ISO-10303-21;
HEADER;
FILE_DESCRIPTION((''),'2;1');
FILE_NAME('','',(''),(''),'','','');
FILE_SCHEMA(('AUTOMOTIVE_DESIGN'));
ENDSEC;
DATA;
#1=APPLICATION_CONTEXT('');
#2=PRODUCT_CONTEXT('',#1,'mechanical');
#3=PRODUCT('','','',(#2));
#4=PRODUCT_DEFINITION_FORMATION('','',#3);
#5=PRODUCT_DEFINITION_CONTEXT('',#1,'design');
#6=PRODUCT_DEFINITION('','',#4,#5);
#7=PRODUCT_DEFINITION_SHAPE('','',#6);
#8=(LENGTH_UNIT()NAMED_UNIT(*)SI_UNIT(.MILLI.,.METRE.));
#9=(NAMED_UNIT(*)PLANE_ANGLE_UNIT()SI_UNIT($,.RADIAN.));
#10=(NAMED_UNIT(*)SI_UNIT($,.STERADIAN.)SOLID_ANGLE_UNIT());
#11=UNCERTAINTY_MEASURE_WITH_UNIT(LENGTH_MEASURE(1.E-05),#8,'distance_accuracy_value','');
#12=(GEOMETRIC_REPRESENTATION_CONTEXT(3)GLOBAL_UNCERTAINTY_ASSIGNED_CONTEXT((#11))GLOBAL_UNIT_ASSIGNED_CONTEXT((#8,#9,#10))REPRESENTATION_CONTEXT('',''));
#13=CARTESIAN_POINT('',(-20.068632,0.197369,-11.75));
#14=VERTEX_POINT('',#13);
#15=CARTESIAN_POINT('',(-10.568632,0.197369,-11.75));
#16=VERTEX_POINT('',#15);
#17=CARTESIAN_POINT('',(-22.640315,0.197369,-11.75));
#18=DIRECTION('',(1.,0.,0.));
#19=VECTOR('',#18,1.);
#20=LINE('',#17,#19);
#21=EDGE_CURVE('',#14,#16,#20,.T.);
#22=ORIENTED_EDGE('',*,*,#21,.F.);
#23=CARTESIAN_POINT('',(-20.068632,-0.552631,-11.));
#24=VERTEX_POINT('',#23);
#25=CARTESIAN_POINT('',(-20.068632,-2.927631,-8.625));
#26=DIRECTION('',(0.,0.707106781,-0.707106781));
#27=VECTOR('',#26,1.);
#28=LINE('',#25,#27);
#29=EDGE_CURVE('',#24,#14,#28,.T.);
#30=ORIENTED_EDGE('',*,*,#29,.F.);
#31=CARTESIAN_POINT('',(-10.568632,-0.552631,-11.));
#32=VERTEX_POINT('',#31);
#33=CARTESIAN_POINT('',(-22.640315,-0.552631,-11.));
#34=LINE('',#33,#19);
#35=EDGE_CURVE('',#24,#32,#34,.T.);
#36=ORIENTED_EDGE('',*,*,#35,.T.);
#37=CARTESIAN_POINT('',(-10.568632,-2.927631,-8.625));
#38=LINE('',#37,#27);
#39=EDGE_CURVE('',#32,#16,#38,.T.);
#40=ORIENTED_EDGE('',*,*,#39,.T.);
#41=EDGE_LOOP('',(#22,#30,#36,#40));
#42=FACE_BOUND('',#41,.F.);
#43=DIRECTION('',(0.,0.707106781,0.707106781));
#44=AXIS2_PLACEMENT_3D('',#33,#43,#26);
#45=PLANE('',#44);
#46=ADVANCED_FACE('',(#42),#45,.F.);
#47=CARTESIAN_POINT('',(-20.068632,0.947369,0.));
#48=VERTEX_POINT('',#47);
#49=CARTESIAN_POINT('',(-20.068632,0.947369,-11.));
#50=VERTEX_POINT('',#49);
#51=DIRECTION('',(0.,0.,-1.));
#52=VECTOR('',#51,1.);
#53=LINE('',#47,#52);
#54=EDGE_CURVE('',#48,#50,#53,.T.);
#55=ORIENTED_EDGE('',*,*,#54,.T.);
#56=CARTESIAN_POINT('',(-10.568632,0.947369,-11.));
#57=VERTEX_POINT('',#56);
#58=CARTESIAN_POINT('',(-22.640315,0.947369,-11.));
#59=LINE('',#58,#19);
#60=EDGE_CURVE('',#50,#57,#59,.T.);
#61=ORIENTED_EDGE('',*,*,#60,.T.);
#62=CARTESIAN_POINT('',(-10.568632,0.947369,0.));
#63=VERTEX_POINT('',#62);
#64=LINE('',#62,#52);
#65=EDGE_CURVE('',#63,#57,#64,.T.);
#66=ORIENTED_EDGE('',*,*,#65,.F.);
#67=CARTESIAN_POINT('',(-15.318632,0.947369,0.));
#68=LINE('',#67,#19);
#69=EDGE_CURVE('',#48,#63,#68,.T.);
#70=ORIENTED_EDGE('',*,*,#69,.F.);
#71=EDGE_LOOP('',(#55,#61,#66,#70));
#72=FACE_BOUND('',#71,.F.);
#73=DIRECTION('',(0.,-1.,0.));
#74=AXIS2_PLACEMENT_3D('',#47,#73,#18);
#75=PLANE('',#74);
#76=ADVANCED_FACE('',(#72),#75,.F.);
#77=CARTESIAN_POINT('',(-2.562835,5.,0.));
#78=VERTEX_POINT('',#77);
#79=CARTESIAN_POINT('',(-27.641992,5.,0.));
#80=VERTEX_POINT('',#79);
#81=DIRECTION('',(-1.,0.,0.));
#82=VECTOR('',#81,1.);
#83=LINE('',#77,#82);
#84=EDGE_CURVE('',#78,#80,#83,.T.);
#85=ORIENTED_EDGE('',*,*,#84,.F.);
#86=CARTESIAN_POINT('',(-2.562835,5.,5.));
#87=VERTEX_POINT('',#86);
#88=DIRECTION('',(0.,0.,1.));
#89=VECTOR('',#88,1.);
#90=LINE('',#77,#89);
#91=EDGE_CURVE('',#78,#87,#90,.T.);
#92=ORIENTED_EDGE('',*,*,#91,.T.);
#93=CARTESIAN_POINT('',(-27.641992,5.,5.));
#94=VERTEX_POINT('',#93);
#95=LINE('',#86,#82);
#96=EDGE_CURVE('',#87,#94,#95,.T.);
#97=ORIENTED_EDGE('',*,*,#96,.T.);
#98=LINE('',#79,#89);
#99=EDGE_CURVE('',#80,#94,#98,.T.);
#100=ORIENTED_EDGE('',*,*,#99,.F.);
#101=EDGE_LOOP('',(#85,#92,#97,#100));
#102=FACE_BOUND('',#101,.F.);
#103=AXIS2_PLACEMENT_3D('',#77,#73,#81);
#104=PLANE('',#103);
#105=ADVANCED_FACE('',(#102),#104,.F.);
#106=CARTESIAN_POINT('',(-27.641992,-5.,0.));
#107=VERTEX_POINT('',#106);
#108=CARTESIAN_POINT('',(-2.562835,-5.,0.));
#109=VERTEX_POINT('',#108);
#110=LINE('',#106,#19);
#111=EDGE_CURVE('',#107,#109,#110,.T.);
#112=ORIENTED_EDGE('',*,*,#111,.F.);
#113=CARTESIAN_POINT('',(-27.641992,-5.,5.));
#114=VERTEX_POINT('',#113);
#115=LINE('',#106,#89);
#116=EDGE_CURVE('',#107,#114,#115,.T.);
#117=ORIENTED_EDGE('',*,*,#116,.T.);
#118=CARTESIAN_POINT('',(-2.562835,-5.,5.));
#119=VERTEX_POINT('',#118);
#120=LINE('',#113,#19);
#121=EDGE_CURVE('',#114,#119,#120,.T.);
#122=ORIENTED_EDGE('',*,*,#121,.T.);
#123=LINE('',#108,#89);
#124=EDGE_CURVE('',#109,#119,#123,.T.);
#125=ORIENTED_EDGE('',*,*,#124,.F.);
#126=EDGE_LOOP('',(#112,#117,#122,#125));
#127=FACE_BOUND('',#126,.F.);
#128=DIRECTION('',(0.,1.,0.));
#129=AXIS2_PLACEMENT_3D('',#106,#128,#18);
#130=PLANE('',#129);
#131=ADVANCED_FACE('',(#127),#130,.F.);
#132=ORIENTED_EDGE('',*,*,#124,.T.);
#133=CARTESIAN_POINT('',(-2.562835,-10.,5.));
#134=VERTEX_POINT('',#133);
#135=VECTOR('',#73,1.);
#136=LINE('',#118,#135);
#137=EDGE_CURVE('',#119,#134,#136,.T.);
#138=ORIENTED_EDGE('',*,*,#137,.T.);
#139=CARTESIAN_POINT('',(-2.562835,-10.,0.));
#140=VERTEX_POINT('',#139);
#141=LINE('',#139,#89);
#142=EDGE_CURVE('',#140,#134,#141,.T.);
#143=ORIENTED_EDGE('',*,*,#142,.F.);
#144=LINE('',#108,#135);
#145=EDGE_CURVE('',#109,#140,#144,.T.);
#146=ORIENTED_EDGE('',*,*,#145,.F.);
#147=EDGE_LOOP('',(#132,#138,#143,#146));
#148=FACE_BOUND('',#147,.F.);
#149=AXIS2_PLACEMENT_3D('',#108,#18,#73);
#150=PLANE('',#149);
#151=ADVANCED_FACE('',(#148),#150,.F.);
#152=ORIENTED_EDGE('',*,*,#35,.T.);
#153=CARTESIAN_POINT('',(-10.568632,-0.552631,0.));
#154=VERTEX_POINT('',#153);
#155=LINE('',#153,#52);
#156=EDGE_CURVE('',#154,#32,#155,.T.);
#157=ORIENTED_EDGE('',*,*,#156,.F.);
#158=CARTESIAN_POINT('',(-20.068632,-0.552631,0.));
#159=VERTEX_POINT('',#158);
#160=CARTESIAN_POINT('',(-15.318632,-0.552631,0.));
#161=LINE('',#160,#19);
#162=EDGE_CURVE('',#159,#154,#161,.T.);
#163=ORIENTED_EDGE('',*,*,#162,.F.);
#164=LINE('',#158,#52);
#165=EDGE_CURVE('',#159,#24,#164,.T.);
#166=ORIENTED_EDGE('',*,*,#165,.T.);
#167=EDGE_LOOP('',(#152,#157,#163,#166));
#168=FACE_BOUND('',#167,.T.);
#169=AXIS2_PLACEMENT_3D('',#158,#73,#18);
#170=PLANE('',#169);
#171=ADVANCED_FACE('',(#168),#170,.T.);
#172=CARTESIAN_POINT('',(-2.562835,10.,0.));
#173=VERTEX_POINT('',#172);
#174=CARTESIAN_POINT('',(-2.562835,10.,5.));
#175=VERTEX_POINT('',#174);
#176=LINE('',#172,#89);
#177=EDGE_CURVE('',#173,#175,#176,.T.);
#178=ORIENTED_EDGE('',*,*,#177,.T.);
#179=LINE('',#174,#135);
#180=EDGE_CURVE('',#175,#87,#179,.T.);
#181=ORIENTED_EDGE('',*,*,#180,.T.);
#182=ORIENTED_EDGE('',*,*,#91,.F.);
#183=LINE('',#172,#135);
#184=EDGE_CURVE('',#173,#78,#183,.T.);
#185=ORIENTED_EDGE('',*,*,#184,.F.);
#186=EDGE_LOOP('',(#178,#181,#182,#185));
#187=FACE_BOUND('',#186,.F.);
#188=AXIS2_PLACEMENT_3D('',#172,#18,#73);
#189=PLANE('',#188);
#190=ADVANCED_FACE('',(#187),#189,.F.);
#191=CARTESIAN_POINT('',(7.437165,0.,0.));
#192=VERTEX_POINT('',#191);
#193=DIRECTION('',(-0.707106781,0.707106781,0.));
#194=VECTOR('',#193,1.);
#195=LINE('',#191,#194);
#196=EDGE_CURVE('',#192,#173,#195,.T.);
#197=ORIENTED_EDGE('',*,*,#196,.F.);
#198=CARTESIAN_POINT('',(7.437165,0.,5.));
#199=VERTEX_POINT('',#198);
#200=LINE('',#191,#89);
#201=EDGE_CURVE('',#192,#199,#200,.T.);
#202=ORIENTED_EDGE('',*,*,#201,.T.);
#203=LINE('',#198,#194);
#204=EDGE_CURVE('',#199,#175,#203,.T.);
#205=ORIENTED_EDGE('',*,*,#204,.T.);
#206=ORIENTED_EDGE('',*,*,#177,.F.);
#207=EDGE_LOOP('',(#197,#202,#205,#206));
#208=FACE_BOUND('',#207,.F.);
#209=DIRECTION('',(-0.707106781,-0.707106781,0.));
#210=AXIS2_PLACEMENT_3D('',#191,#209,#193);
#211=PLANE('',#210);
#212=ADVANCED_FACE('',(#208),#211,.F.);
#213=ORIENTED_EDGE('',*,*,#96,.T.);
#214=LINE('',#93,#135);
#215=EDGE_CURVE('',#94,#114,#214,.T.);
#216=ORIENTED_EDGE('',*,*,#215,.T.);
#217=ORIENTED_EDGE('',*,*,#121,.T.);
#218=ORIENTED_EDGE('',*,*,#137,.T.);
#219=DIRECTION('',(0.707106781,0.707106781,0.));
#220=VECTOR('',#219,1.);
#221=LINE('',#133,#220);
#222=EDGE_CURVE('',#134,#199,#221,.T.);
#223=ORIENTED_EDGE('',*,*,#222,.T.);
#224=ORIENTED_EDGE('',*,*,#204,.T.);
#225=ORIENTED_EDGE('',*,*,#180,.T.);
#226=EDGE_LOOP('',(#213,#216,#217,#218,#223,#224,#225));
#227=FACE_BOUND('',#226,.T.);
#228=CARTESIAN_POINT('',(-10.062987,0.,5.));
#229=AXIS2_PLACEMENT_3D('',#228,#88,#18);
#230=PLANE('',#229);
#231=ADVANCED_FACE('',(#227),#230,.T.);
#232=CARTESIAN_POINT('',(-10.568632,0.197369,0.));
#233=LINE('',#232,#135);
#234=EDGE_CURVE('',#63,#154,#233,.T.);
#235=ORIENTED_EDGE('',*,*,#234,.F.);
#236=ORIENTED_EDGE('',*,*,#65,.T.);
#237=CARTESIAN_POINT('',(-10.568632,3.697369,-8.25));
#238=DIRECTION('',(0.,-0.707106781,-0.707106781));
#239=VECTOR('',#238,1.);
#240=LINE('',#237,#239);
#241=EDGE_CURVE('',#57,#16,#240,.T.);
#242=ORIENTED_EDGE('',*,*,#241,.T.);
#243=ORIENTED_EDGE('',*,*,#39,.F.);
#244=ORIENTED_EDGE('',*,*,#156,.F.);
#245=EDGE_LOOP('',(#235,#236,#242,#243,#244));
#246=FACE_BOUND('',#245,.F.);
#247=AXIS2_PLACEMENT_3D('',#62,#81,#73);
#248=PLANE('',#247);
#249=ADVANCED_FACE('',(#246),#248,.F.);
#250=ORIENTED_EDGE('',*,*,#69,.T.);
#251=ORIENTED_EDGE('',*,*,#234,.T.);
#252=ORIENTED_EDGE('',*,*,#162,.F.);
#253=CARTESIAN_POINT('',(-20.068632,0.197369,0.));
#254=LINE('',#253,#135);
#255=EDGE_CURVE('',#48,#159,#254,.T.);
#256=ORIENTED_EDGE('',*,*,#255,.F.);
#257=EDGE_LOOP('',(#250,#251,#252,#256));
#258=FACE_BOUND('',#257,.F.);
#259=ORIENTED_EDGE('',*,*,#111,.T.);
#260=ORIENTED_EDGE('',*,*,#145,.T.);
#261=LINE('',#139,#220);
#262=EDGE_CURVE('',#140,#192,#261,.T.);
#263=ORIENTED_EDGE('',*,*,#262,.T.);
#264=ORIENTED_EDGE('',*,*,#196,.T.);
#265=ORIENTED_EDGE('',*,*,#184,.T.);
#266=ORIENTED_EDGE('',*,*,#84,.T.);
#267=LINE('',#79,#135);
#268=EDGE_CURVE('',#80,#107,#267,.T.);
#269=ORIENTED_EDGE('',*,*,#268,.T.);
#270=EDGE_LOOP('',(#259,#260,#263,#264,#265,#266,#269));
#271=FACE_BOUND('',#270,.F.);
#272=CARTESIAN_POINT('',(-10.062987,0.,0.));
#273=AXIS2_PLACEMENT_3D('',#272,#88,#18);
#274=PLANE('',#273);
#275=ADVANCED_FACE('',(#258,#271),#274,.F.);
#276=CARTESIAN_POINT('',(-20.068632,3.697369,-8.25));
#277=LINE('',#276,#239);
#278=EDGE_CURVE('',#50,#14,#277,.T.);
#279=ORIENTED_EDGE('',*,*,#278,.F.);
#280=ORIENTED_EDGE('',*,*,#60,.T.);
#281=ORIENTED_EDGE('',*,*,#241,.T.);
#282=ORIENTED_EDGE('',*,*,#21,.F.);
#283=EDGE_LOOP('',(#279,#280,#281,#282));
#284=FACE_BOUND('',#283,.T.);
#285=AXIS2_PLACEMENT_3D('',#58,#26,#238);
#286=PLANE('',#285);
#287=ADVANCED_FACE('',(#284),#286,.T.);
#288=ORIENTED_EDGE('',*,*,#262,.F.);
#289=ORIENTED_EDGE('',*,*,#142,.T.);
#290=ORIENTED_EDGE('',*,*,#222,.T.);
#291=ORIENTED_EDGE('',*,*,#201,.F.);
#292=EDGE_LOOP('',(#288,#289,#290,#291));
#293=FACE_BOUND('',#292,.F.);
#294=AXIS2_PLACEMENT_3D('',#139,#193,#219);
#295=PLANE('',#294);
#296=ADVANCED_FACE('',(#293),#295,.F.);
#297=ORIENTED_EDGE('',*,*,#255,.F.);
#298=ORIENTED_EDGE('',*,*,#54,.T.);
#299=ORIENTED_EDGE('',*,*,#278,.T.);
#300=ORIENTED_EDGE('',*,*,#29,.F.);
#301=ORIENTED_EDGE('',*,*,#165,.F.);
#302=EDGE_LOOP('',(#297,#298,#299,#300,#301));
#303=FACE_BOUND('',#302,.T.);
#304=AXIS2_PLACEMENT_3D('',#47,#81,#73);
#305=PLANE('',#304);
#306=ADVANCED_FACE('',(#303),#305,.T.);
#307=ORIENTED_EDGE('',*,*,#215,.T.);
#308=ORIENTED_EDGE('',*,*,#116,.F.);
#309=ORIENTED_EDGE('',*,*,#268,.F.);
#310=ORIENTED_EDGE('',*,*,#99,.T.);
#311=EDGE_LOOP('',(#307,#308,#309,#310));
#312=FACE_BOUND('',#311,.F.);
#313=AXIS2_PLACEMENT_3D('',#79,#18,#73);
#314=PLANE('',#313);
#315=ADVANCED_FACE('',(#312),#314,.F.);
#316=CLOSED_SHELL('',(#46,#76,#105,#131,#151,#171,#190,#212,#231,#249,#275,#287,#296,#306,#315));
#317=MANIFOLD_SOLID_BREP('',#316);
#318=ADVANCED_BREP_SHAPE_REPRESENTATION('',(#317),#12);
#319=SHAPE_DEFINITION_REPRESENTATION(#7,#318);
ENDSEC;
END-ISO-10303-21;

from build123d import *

# Parameters (mm, degrees)
F1_DEPTH    = 5
F2_W        = 9.5
F2_H        = 1.5
F3_DEPTH    = 12
F4_T1_DEPTH = 14.6433659759


# Not quite as in the source:
# - a fillet or chamfer that OpenCascade refuses, or shapes differently, is made with other operations: its cross-section is extruded or revolved along the edge and cut away or added


with BuildPart() as f1:
    # F0 (on Top) → F1 (new body)
    with BuildSketch(Plane.XY):
        Polygon((-2.5628354418, 5), (-27.6419919184, 5), (-27.6419919184, -5), (-2.5628354418, -5), (-2.5628354418, -10), (7.4371645582, 0), (-2.5628354418, 10), align=None)
    extrude(amount=F1_DEPTH)

    # F2 (on face) → F3 (join)
    with BuildSketch(Plane(origin=(0, 0, 0), x_dir=(1, 0, 0), z_dir=(0, 0, -1))):
        with Locations((-15.3186318129, -0.1973686223)):
            Rectangle(F2_W, F2_H)
    extrude(amount=F3_DEPTH)

    # F4: chamfer of 1 on 2 edges, made by hand

    # F4_s2 → F4_t1 (cut)
    with BuildSketch(Plane.YZ.offset(-22.6403148009)):
        Polygon((0.9473686223, -11), (-0.0526313777, -12), (0.9473686223, -12), align=None)
        Polygon((-0.5526313777, -11), (0.4473686223, -12), (-0.5526313777, -12), align=None)
    extrude(amount=F4_T1_DEPTH, mode=Mode.SUBTRACT)


solid = f1.part
